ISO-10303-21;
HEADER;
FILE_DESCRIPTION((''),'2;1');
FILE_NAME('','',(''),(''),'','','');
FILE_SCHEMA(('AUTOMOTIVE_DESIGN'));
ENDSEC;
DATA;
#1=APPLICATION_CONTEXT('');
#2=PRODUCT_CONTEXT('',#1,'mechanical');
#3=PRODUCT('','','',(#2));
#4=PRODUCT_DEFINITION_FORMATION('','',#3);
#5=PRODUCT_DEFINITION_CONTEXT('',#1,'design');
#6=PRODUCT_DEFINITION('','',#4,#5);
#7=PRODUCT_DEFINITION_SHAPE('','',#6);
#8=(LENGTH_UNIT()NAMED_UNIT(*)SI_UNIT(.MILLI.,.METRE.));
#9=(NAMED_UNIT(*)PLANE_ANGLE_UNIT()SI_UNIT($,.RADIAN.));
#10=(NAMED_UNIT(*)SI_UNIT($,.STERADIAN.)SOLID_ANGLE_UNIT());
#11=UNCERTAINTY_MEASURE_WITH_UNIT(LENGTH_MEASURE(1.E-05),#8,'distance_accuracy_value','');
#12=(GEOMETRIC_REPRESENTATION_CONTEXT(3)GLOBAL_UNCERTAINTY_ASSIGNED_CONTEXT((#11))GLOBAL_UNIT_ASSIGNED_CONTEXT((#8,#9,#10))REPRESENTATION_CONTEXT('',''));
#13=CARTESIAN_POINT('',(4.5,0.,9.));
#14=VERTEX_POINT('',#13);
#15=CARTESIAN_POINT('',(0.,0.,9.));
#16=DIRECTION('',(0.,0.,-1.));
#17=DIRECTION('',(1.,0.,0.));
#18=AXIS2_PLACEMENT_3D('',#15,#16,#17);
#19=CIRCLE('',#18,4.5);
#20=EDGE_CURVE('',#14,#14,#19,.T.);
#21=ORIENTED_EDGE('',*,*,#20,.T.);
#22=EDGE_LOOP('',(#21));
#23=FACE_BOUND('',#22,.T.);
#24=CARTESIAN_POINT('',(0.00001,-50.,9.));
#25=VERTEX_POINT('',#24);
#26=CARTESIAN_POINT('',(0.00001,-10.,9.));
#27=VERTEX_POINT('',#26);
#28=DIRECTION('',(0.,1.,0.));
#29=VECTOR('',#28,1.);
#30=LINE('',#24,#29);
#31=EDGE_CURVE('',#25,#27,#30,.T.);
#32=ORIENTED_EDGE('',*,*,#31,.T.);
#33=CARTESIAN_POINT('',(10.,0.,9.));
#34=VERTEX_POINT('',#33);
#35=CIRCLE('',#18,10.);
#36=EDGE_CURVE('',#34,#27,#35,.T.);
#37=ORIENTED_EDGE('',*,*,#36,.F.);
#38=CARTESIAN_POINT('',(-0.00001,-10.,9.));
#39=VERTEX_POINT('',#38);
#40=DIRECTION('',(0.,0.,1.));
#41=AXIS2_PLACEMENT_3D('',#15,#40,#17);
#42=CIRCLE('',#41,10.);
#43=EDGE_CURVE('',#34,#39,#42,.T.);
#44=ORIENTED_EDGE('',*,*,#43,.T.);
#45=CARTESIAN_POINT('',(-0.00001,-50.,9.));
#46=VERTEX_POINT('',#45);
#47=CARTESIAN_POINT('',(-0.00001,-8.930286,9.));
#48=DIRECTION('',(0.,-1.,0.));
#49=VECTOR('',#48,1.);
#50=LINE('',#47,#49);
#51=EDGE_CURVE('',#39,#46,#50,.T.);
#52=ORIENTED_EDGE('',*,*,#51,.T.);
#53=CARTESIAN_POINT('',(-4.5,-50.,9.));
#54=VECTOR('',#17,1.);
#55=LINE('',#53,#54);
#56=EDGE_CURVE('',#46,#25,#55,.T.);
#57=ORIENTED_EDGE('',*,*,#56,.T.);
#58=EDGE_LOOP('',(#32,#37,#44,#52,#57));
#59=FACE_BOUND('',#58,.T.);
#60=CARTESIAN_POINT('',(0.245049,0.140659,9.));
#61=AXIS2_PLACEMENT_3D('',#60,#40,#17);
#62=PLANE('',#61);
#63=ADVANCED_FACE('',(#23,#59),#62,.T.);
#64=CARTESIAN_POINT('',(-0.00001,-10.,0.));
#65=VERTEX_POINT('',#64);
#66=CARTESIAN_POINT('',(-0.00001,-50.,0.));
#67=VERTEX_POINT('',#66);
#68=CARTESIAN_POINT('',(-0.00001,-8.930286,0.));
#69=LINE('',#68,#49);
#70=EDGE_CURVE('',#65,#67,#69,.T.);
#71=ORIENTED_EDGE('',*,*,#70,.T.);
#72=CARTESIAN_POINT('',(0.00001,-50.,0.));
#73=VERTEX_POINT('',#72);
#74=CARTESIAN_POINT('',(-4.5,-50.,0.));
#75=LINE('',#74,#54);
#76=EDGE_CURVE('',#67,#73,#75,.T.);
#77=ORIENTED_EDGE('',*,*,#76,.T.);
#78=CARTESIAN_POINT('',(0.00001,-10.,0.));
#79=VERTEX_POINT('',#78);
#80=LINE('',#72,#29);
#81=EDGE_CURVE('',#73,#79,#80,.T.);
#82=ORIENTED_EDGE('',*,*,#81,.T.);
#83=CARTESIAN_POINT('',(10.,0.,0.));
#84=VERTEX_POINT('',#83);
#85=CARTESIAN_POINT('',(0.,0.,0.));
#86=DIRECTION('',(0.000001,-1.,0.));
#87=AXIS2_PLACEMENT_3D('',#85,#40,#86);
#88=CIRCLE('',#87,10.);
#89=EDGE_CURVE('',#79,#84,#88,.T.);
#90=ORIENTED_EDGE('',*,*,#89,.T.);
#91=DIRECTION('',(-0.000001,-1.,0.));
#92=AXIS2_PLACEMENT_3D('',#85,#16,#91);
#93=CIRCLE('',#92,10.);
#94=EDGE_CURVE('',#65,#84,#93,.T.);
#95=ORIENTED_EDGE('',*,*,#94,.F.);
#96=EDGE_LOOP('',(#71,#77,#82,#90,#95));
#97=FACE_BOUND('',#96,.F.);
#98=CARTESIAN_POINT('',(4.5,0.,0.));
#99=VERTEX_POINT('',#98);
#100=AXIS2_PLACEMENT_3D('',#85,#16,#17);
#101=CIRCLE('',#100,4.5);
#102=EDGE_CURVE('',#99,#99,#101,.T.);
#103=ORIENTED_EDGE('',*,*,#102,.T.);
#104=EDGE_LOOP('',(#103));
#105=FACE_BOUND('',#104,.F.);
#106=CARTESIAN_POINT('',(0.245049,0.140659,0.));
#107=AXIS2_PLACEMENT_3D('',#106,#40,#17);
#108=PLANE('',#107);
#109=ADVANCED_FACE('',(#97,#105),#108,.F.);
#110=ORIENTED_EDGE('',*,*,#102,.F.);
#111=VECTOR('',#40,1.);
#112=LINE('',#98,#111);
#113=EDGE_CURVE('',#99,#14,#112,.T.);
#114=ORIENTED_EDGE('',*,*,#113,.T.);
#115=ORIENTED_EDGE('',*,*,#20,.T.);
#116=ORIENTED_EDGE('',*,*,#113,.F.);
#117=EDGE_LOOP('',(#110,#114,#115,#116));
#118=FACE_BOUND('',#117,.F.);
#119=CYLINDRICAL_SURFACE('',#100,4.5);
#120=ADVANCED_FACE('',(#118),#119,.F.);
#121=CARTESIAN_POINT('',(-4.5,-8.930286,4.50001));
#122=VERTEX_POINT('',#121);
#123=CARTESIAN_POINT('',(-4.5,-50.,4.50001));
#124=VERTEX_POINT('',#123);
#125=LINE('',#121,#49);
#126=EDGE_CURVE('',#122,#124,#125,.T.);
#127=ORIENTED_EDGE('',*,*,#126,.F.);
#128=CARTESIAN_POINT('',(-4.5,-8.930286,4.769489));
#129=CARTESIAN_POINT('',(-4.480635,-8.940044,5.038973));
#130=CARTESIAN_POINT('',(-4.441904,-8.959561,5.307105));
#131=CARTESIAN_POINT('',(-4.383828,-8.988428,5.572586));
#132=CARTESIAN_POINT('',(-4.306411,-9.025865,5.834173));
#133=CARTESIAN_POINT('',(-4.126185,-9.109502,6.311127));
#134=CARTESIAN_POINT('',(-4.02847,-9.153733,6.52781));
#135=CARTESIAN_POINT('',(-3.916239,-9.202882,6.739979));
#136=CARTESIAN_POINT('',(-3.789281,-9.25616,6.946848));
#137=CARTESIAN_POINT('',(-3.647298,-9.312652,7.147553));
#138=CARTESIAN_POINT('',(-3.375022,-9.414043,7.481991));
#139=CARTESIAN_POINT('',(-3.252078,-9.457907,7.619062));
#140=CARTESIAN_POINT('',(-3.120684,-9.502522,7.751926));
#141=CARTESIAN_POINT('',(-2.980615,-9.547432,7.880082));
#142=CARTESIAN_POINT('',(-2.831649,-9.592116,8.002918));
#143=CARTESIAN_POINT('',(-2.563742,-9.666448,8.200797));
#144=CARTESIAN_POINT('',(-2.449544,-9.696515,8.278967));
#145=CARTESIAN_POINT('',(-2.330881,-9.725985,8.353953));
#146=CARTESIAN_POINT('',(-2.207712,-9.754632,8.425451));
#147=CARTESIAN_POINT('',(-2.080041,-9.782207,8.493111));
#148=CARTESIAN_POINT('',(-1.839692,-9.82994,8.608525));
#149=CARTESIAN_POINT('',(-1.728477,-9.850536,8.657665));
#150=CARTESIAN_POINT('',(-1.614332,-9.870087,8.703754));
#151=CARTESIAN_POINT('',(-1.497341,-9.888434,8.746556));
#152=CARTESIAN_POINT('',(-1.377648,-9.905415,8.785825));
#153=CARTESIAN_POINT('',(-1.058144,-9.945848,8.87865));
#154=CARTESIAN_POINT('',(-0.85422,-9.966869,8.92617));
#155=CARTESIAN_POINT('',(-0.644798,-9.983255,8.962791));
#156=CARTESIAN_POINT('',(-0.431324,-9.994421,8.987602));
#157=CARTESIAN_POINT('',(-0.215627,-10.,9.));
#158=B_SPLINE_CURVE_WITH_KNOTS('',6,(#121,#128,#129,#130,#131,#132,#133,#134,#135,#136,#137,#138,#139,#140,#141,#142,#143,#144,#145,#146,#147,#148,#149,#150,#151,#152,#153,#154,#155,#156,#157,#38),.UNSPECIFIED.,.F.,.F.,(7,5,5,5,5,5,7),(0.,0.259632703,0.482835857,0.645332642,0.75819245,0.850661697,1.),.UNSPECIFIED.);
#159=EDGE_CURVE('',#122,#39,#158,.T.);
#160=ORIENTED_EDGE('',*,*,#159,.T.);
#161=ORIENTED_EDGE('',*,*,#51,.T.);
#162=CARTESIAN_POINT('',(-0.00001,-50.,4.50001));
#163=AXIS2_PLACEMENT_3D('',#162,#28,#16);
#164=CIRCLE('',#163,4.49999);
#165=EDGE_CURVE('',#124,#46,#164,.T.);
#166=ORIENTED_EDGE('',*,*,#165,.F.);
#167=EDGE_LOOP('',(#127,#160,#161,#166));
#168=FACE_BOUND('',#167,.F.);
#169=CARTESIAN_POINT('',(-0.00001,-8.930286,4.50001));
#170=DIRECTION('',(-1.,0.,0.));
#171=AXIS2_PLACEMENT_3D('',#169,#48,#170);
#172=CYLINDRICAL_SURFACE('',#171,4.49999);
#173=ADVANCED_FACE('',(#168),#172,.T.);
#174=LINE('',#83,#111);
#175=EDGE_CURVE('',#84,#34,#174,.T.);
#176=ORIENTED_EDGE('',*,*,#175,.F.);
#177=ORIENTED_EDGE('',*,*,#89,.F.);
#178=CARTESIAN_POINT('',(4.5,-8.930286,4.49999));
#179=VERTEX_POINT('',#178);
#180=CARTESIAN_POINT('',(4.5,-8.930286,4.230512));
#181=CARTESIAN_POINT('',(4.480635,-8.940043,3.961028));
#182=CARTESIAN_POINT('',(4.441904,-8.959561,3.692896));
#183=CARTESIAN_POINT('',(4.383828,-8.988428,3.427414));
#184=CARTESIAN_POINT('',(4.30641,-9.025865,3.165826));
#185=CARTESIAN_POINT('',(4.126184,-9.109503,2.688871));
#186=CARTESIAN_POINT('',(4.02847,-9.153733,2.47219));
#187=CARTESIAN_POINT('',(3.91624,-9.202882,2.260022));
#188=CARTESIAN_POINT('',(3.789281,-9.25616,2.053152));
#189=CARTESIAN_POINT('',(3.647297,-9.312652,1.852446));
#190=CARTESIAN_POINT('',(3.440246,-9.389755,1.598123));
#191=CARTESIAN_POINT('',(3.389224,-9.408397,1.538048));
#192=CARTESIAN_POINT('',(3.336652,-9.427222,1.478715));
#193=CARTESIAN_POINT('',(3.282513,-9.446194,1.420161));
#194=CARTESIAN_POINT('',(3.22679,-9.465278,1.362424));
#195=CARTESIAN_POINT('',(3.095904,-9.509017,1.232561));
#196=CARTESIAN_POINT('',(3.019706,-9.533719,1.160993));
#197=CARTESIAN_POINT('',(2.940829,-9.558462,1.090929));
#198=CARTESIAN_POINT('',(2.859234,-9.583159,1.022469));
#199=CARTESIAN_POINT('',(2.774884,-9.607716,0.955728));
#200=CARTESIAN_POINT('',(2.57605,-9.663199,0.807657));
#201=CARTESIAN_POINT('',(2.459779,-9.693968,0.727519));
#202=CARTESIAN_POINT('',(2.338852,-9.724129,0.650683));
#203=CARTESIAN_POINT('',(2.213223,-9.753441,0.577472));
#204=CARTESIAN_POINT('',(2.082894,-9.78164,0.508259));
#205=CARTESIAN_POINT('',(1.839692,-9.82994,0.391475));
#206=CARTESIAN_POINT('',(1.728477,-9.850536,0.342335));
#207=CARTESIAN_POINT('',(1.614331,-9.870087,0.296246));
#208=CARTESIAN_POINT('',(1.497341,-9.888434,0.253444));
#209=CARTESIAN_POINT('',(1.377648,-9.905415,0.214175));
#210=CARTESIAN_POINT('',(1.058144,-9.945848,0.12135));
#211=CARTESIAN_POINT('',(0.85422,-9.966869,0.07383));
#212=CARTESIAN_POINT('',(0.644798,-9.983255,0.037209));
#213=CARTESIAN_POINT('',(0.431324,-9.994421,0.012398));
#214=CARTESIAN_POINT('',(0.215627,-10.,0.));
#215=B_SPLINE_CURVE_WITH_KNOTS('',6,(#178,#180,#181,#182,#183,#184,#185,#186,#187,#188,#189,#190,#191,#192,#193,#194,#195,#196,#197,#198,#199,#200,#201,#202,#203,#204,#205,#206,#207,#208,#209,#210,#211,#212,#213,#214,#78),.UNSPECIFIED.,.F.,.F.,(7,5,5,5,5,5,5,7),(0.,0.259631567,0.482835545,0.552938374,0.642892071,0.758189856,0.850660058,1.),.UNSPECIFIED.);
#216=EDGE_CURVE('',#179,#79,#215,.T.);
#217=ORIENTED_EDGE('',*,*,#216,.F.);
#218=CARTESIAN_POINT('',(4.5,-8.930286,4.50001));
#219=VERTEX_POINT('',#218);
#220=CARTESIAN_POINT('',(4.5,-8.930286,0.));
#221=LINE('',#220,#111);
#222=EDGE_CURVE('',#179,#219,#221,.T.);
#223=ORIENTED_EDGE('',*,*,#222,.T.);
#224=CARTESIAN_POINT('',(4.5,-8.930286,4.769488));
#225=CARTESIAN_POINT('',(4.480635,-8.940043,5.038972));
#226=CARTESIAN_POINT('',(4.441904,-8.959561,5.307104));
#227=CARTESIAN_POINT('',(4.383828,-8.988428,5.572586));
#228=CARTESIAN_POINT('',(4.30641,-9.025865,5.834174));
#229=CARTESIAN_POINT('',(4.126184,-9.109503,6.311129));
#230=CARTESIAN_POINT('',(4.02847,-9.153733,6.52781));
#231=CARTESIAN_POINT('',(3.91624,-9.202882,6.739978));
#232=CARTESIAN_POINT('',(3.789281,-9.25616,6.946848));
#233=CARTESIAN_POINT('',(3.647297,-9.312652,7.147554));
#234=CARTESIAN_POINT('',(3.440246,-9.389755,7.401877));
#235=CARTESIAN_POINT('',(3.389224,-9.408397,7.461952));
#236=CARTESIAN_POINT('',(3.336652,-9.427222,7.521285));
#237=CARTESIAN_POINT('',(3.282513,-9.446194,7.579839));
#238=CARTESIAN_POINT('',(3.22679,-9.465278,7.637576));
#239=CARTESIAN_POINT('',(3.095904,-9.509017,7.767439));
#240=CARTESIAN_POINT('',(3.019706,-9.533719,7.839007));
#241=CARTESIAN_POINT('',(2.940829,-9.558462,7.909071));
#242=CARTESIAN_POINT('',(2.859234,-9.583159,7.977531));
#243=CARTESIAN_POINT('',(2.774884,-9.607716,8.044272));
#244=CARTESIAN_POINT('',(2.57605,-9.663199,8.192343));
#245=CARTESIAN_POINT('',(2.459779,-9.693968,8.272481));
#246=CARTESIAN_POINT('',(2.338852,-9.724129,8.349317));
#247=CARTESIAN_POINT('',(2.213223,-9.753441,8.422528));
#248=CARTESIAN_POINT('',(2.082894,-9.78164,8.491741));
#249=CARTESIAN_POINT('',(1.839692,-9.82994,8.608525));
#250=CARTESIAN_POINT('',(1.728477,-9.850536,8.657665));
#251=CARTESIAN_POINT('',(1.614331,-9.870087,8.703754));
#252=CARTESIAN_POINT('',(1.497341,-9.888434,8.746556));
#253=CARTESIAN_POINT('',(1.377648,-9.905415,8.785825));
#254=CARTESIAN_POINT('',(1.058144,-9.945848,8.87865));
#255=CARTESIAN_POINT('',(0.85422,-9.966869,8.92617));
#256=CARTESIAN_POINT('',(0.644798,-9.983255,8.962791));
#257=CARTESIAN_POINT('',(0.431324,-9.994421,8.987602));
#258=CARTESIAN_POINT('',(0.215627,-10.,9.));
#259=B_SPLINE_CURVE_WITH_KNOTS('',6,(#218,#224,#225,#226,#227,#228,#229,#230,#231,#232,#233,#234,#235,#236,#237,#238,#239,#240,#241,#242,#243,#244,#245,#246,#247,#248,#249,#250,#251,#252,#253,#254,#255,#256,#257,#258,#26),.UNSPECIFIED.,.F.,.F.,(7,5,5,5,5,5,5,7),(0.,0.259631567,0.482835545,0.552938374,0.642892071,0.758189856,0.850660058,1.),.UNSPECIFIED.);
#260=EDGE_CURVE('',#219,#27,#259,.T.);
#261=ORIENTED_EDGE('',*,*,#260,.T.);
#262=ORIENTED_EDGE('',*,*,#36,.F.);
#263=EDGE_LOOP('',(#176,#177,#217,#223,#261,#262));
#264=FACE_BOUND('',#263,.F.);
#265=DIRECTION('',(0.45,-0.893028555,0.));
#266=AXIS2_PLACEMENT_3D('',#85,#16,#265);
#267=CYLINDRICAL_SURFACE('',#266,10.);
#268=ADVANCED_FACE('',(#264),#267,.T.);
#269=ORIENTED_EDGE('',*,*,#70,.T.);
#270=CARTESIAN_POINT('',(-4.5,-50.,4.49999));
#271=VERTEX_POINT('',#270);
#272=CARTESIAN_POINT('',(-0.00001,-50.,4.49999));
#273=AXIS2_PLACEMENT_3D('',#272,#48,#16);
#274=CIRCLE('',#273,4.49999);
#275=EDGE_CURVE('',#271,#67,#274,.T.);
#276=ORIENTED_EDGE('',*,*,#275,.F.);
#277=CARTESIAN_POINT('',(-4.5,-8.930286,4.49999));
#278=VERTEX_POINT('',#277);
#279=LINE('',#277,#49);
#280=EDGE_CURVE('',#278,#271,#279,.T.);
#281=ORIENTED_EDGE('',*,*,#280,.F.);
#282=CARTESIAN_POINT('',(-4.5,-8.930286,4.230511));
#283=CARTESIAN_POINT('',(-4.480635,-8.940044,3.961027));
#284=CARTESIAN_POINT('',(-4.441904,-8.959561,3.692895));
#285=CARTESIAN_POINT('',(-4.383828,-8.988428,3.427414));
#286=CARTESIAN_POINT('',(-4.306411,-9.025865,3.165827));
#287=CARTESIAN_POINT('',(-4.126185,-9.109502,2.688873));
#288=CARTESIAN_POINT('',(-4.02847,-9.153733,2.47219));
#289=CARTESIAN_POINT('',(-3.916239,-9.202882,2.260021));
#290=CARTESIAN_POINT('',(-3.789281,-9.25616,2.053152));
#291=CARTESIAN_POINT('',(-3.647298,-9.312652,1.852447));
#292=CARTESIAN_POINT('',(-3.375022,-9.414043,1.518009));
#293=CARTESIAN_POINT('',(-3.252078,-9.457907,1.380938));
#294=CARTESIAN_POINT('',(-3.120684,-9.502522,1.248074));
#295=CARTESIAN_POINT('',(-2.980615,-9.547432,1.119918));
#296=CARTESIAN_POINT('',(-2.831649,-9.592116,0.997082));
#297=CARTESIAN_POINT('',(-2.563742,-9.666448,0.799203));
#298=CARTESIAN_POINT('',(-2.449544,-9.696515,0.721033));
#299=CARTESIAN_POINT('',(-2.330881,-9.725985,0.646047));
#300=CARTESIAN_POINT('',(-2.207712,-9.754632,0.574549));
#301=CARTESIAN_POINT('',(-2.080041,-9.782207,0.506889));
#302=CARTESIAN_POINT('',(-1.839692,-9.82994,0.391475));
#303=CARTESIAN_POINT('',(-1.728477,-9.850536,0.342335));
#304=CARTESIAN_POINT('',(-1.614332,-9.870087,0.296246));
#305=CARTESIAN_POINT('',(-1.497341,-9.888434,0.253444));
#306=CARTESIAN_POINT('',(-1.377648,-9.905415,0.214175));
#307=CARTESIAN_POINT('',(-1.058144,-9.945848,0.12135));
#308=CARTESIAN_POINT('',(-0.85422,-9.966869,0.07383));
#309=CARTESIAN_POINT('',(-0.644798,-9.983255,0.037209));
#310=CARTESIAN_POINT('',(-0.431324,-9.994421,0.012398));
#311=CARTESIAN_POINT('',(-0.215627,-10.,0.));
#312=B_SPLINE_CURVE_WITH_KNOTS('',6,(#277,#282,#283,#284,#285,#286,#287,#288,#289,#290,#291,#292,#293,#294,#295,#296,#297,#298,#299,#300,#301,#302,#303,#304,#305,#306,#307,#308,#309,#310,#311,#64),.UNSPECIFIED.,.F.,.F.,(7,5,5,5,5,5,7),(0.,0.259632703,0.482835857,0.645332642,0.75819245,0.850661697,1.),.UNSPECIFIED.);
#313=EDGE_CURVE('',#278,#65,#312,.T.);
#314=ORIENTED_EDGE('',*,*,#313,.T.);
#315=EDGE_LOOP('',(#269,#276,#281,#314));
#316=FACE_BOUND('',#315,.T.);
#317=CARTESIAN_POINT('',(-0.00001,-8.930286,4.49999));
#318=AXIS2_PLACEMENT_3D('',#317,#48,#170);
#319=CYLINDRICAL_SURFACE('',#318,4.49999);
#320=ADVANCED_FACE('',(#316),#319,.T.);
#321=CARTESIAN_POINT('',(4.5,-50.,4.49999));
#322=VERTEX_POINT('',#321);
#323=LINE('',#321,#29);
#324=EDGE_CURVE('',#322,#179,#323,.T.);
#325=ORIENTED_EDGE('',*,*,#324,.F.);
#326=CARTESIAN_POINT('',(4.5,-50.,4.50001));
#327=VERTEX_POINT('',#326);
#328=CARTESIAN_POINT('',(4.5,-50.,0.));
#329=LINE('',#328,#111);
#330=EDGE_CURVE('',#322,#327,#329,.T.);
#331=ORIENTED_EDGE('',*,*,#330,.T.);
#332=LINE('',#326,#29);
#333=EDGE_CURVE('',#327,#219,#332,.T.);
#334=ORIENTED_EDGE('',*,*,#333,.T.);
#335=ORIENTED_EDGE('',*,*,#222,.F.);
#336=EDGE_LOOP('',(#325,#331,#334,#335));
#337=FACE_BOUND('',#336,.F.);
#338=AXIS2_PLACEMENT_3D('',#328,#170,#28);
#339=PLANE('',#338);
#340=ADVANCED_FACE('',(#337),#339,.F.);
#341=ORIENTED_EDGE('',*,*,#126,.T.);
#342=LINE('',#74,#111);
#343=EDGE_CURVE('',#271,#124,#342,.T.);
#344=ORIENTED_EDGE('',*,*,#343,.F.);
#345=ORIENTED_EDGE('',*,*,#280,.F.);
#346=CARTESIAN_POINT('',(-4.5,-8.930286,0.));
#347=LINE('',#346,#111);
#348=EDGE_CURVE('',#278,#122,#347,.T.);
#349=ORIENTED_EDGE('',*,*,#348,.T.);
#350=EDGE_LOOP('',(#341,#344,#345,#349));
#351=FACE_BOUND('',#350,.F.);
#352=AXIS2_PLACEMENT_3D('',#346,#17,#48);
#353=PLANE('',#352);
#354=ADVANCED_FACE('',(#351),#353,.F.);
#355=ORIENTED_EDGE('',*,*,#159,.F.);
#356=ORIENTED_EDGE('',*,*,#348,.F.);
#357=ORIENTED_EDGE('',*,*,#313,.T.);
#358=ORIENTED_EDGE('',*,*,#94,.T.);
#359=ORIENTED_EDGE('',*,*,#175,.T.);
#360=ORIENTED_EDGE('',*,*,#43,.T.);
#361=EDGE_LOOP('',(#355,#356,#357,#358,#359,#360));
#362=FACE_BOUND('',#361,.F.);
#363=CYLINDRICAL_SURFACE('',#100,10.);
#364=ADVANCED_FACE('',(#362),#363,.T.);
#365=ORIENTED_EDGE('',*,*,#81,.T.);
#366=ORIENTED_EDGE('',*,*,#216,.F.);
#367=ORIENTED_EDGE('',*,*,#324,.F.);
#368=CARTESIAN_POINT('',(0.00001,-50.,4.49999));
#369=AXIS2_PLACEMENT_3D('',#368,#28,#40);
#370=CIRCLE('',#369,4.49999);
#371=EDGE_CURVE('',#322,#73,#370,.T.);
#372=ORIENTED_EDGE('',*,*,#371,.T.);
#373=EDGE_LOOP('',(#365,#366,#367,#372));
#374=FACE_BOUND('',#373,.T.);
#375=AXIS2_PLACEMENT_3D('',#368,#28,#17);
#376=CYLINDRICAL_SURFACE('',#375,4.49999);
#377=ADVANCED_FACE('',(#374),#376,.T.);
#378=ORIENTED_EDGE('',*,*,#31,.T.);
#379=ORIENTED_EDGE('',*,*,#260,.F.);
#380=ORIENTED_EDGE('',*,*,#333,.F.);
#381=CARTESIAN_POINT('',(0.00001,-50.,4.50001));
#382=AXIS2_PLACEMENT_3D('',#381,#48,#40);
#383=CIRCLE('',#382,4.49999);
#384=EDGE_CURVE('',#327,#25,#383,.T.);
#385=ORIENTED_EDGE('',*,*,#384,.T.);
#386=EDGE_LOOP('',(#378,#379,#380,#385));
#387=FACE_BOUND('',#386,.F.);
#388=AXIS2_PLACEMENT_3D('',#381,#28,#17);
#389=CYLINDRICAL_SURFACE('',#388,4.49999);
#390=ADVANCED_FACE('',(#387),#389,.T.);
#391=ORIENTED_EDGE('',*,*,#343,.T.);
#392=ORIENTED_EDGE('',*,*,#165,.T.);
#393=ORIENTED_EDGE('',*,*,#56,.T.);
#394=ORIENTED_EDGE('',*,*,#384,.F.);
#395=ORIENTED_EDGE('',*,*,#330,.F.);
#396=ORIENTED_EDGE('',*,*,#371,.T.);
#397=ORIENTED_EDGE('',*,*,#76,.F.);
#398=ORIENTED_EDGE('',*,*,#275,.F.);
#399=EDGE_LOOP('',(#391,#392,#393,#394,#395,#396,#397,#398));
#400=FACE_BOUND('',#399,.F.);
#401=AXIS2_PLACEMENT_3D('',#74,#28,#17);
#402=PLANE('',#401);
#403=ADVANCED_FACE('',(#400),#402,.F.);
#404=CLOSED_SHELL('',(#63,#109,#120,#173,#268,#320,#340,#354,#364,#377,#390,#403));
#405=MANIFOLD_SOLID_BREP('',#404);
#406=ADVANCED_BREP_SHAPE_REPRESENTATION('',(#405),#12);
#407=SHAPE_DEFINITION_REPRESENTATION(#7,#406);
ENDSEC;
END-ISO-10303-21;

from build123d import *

# Parameters (mm, degrees)
F1_DEPTH = 9
F2_R     = 4.49999


# Not quite as in the source:
# - a fillet or chamfer is up to 0.001 mm smaller than in the source, because OpenCascade refuses the exact size


with BuildPart() as f1:
    # F0 (on Top) → F1 (new body)
    with BuildSketch(Plane.XY):
        with BuildLine():
            ThreePointArc((4.5, -8.9302855497), (8.514693183, -5.2440442409), (10, 0))
            ThreePointArc((10, 0), (-5.2440442409, 8.514693183), (-4.5, -8.9302855497))
            Line((-4.5, -8.9302855497), (-4.5, 0))
            ThreePointArc((-4.5, 0), (0, 4.5), (4.5, 0))
            Line((4.5, 0), (4.5, -8.9302855497))
        make_face()
        with BuildLine():
            Line((-4.5, 0), (-4.5, -8.9302855497))
            ThreePointArc((-4.5, -8.9302855497), (0, -10), (4.5, -8.9302855497))
            Line((4.5, -8.9302855497), (4.5, 0))
            ThreePointArc((4.5, 0), (0, -4.5), (-4.5, 0))
        make_face()
        with BuildLine():
            ThreePointArc((4.5, -8.9302855497), (0, -10), (-4.5, -8.9302855497))
            Line((-4.5, -8.9302855497), (-4.5, -50))
            Line((-4.5, -50), (4.5, -50))
            Line((4.5, -50), (4.5, -8.9302855497))
        make_face()
    extrude(amount=F1_DEPTH)

    # F2 (radius 4.5 in the source; OpenCascade refuses exactly that, so slightly less here)
    f2_edges = [f1.edges().sort_by_distance(p)[0] for p in [
        (-4.5, -29.465143, 9),
        (4.5, -29.465143, 9),
        (4.5, -29.465143, 0),
        (-4.5, -29.465143, 0),
    ]]
    fillet(f2_edges, radius=F2_R)


solid = f1.part
